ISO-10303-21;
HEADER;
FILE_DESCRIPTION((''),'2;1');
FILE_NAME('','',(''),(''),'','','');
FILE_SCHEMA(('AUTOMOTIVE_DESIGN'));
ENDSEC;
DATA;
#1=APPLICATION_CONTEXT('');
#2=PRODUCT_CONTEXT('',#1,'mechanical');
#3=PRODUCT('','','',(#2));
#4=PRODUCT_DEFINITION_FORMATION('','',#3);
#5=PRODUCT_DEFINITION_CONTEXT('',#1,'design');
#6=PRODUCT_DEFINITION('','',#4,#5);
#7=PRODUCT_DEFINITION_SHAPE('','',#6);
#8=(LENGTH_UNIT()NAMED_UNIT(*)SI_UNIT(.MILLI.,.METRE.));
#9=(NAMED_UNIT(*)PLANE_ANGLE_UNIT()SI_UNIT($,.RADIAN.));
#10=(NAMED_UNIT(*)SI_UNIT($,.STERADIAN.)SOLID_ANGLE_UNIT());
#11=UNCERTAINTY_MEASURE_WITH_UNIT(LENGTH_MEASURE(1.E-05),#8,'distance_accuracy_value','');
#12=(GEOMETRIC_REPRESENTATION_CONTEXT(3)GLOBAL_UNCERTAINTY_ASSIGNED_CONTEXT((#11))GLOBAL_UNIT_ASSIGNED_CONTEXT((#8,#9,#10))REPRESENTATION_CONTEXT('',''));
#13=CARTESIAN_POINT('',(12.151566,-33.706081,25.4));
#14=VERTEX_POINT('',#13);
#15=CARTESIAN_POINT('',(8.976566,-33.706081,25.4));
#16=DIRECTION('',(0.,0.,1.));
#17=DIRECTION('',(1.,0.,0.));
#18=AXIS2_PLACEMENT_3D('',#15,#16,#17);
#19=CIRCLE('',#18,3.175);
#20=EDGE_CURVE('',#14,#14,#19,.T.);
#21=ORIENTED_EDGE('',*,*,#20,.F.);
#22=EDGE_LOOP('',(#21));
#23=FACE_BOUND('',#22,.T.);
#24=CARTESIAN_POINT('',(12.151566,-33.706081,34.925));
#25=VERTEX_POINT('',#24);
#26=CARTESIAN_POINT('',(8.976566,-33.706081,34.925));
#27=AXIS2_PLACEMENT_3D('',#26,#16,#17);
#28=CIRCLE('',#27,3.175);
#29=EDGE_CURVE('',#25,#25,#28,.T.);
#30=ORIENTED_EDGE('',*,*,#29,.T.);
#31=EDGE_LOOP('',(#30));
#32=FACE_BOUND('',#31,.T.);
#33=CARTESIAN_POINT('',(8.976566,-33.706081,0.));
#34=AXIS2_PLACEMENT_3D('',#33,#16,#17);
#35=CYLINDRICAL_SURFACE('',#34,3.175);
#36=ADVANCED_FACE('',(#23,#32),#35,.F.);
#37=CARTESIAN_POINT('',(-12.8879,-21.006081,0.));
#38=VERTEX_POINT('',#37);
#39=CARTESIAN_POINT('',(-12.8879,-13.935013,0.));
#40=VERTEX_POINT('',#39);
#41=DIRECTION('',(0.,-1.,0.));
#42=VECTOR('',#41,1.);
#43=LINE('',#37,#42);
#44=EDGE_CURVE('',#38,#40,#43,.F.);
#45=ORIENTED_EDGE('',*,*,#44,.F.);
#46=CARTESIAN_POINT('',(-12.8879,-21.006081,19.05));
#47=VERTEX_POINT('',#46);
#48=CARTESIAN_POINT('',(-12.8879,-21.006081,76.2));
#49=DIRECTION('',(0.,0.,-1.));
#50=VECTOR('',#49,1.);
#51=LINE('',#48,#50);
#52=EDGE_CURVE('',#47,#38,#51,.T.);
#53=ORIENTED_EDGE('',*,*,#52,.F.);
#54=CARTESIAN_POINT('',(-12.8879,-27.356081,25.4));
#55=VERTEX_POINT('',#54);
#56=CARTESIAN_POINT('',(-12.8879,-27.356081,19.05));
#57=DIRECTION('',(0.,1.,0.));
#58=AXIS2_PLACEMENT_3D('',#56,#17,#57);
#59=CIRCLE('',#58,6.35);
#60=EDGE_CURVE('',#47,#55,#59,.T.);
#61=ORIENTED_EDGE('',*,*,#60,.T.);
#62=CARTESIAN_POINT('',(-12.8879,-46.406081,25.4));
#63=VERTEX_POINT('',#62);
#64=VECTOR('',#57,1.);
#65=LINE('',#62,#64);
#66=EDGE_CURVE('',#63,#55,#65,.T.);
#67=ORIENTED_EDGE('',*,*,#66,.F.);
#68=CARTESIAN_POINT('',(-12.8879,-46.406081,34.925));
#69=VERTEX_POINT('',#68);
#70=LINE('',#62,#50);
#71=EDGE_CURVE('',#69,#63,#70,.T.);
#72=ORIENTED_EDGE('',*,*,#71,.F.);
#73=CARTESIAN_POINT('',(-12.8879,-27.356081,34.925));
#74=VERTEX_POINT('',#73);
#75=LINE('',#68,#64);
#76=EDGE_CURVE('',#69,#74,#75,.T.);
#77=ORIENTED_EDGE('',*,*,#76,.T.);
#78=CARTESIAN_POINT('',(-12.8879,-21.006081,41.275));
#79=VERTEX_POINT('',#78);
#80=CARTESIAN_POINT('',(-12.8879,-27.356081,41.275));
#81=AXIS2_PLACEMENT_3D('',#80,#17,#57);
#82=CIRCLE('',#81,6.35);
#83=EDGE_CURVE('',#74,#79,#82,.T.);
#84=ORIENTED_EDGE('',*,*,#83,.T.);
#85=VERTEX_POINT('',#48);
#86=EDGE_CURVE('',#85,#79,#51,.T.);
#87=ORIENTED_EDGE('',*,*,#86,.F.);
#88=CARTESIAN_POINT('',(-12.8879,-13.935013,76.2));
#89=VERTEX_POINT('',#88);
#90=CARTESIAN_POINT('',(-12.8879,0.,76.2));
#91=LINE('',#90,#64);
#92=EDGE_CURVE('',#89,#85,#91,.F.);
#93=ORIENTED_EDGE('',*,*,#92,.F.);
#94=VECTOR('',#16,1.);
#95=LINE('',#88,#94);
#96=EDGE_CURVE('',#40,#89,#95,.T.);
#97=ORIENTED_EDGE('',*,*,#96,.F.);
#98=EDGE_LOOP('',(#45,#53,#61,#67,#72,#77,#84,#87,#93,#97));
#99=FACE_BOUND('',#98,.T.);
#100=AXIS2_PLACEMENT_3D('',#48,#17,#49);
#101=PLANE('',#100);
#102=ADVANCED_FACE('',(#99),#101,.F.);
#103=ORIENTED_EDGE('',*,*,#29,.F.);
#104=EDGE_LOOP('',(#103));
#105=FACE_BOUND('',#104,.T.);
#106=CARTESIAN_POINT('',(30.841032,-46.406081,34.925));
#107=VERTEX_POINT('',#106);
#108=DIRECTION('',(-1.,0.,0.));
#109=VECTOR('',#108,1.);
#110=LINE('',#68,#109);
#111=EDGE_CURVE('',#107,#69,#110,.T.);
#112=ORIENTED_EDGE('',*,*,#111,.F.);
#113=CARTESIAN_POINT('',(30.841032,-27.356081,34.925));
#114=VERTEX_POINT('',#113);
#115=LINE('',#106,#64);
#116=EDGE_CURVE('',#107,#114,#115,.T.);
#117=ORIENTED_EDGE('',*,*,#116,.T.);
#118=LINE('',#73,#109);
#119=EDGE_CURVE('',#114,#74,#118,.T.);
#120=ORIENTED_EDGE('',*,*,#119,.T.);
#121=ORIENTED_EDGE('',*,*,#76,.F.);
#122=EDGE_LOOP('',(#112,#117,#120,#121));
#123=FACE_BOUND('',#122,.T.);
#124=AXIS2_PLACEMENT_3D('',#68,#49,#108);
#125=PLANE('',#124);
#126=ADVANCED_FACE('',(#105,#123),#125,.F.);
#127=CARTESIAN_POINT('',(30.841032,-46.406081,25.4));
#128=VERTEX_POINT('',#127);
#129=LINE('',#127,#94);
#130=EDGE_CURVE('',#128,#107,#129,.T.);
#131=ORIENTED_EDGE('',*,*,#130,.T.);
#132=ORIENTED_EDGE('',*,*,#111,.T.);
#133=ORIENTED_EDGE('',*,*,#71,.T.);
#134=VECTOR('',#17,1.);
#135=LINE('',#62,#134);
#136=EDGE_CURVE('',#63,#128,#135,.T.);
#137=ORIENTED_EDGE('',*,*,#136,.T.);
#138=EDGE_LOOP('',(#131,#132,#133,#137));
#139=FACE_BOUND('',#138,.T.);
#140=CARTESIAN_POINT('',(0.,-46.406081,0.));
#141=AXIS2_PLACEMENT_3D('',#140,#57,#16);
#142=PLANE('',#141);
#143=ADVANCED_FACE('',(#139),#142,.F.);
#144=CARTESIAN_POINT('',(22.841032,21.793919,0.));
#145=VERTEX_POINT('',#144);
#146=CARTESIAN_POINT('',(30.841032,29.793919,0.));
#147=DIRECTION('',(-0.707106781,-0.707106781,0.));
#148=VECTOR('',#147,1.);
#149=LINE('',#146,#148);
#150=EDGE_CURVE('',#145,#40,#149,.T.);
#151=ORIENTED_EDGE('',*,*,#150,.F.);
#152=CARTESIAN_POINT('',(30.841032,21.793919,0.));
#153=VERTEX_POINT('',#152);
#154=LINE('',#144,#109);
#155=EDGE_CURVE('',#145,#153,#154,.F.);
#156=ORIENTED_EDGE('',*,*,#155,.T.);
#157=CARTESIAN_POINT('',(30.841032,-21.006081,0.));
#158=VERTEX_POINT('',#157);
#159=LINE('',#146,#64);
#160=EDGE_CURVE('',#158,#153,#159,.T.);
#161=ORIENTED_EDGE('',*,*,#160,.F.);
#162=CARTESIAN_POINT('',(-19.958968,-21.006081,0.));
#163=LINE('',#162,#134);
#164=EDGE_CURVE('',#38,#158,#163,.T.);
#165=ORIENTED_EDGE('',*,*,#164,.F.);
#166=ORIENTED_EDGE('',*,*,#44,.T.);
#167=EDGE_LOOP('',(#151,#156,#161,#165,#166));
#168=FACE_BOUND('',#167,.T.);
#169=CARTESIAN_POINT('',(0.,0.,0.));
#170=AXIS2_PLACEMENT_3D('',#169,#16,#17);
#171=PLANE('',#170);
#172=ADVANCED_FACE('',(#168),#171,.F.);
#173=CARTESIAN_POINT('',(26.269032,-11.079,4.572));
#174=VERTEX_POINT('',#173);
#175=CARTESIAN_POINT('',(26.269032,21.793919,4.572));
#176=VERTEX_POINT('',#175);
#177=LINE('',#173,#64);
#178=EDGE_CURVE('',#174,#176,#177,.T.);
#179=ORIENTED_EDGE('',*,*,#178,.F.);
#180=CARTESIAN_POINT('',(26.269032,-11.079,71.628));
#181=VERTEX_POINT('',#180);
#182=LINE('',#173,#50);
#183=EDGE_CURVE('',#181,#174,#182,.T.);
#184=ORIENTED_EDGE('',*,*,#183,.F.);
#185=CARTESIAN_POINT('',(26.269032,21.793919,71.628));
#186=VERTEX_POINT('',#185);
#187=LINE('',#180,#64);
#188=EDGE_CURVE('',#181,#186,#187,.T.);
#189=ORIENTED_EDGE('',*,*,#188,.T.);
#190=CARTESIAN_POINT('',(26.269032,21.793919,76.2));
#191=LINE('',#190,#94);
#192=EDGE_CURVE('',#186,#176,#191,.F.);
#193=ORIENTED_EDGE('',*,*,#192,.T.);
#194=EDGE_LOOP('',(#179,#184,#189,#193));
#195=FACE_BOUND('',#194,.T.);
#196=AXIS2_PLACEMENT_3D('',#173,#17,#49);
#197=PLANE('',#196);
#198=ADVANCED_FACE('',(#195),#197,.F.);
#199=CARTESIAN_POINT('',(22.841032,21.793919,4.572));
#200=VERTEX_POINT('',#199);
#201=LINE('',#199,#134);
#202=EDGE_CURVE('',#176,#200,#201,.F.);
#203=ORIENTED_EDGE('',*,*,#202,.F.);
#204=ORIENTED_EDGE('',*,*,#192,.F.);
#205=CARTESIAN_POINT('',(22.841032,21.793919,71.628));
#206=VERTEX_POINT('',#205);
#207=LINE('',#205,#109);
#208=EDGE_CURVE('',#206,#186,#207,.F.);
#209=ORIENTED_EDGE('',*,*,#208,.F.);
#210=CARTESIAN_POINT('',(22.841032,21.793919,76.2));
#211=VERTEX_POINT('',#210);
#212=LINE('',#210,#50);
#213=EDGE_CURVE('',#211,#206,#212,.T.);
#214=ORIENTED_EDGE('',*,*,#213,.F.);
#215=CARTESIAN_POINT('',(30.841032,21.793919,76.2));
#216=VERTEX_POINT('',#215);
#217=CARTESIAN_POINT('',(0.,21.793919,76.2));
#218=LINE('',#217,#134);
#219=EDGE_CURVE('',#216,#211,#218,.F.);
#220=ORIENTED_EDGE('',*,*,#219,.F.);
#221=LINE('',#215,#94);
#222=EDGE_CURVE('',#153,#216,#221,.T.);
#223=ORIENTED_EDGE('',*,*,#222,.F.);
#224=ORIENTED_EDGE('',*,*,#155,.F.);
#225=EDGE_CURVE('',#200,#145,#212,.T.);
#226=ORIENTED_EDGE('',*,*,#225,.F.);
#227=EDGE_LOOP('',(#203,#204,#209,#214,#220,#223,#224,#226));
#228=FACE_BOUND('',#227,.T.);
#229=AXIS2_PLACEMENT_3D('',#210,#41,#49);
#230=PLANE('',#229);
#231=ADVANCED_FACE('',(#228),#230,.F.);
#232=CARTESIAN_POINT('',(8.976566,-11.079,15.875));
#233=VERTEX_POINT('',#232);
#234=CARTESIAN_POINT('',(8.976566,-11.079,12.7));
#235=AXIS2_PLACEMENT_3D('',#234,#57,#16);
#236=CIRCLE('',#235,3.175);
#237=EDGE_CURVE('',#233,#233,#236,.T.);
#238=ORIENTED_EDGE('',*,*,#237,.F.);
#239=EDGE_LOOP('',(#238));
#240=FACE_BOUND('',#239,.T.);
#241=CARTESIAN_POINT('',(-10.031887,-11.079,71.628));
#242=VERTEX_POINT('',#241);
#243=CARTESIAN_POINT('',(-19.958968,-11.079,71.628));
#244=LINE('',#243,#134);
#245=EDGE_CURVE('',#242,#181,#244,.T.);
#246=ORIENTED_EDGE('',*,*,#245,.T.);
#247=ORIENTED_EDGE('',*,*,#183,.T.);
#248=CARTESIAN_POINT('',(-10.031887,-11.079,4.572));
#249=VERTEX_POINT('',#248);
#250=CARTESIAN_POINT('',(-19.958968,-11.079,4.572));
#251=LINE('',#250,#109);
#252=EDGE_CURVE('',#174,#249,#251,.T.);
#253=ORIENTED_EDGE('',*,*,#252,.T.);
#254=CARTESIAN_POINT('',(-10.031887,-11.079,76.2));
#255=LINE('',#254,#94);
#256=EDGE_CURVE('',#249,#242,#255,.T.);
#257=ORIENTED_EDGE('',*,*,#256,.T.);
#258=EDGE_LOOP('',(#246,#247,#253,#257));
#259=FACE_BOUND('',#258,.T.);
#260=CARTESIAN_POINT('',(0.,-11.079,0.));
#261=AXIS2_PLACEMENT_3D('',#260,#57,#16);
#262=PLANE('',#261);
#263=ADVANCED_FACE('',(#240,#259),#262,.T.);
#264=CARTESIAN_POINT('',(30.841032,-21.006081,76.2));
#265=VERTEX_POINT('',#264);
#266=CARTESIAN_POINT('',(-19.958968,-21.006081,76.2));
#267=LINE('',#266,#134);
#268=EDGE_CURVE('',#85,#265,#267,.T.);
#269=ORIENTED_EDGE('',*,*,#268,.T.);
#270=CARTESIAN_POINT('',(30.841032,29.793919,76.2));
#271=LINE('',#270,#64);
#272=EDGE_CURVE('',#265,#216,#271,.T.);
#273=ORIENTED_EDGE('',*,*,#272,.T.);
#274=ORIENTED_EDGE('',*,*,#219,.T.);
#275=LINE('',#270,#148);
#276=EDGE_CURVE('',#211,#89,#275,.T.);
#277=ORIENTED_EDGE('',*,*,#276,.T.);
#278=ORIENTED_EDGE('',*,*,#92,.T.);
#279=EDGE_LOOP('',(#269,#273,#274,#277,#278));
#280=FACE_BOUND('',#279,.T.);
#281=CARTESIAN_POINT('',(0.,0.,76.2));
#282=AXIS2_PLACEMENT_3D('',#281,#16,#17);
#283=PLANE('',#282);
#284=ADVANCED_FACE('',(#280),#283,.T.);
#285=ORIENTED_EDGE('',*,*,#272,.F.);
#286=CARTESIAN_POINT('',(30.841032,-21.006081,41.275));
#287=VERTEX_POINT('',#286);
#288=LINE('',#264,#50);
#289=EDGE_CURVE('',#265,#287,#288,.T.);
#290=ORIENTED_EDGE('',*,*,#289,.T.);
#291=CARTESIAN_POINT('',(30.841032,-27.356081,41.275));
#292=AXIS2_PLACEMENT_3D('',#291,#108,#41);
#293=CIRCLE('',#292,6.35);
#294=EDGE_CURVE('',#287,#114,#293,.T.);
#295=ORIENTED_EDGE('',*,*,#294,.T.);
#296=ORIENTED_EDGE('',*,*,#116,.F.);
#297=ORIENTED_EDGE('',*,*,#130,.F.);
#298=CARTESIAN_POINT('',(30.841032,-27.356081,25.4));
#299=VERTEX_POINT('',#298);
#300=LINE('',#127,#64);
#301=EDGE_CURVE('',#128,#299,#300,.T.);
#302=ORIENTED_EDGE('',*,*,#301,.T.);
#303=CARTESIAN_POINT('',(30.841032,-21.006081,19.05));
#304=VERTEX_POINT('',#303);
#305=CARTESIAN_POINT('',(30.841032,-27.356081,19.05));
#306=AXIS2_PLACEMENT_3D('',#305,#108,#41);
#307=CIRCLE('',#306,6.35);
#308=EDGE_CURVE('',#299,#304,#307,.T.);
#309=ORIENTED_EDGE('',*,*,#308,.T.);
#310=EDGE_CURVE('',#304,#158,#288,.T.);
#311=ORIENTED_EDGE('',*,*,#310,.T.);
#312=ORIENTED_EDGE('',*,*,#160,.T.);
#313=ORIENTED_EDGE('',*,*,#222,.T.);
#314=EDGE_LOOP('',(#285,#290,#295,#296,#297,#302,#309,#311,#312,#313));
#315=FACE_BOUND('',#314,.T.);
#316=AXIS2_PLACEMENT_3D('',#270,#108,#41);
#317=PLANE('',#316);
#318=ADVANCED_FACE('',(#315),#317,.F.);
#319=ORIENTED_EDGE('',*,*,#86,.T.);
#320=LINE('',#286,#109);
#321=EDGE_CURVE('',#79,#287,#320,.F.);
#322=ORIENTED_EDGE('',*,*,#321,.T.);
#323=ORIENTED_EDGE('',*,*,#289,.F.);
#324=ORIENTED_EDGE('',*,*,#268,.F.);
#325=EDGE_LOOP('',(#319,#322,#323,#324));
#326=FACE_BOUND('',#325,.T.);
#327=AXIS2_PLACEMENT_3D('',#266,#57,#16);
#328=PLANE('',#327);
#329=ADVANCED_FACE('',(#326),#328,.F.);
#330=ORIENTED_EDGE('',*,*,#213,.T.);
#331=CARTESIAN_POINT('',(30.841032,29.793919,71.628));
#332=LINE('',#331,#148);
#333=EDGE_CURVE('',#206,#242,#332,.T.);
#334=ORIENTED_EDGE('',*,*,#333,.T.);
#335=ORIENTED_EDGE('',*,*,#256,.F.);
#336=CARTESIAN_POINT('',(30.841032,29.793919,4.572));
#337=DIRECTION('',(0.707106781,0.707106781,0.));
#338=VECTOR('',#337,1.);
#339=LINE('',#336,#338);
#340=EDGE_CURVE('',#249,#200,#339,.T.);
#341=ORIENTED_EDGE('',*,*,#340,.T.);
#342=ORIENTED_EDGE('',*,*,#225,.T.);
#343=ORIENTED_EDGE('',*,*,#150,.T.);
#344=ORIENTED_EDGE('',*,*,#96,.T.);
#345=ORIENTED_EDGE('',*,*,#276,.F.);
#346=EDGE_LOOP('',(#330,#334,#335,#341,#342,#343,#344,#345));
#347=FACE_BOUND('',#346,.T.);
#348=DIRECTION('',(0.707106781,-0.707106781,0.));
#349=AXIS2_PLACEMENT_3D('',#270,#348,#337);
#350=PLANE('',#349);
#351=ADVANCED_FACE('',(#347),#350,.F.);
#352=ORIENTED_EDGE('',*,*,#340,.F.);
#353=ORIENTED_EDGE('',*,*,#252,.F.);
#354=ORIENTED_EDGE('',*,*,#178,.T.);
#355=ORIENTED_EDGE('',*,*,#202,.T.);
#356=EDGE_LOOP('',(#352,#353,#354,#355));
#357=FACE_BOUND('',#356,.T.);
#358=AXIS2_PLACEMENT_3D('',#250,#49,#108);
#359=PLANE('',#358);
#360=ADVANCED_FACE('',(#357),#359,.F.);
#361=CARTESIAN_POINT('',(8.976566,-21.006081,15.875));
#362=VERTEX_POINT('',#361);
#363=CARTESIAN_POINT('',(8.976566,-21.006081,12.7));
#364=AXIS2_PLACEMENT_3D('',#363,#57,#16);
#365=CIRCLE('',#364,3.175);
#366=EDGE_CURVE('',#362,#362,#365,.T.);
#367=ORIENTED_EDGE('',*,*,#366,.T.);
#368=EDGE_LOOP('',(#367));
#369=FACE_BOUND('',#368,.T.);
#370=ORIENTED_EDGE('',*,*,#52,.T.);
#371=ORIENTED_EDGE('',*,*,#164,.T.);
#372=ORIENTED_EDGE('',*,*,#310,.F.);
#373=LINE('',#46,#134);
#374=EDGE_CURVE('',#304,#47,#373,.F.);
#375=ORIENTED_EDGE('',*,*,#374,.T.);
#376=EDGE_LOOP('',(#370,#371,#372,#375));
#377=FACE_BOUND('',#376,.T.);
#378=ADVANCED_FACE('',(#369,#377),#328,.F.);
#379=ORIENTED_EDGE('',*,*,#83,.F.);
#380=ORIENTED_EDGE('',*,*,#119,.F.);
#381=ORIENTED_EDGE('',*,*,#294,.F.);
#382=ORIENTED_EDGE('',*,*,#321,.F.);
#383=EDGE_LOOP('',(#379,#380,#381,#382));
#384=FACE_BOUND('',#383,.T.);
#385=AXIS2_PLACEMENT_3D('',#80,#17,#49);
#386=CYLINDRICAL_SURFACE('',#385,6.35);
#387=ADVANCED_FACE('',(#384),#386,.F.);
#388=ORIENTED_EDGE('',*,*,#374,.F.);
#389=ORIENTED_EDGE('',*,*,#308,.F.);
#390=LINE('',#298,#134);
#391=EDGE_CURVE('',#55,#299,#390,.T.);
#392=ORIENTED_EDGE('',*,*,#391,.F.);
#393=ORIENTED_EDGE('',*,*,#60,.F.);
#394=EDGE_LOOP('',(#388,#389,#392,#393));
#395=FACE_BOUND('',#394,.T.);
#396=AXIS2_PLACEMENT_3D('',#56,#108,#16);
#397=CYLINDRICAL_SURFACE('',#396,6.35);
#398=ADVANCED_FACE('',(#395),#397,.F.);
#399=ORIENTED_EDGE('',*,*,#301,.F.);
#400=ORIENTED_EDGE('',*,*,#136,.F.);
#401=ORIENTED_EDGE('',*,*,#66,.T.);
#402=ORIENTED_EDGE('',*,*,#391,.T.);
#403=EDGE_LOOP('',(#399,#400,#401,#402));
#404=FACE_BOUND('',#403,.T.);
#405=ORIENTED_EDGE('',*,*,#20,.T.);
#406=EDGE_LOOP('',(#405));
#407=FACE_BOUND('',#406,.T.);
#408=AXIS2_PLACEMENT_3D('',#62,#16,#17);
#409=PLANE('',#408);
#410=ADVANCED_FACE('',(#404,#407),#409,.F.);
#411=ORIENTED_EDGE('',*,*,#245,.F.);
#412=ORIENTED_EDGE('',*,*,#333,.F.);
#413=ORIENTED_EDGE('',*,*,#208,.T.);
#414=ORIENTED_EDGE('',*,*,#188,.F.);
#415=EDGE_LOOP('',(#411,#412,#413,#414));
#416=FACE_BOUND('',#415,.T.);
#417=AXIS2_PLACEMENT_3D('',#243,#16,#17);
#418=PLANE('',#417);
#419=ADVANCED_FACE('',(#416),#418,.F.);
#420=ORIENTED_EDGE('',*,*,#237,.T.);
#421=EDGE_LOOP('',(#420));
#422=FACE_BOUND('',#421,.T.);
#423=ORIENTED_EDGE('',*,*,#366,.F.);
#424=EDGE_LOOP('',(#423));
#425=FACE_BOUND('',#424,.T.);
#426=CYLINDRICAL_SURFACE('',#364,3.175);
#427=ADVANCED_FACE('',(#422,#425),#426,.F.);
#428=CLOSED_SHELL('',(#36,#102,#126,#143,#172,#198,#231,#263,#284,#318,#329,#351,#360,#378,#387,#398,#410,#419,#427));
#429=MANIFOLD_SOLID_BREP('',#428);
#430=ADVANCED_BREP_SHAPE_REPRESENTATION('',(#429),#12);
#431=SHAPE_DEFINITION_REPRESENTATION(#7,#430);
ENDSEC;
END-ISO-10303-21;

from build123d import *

# Parameters (mm, degrees)
BOSS_EXTRUDE1_DEPTH     = 76.2
CUT_EXTRUDE1_DEPTH      = 32
CUT_EXTRUDE1_DEPTH_BACK = 11.07899994
SKETCH2_W               = 46.228
SKETCH2_H               = 67.056
CHAMFER2_SIZE           = 11.313708499
CHAMFER2_SIZE_2         = 8
CHAMFER3_SIZE           = 10
CHAMFER3_SIZE2          = 7.071067812
SKETCH3_R               = 3.175
CUT_EXTRUDE2_DEPTH      = 89.533824561
SKETCH8_W               = 43.728932188
SKETCH8_H               = 9.525
BOSS_EXTRUDE3_DEPTH     = 25.4
SKETCH9_R               = 3.175
CUT_EXTRUDE3_DEPTH      = 70.342045029
FILLET2_R               = 6.35


with BuildPart() as part:
    # Sketch1 → Boss-Extrude1 (new body)
    with BuildSketch(Plane.XY):
        Polygon((30.841032184, 29.793919389), (-19.958967816, -21.006080611), (30.841032184, -21.006080611), align=None)
    extrude(amount=BOSS_EXTRUDE1_DEPTH)

    # Sketch2 → Cut-Extrude1 (cut, two sides: drawn at the far end of the back side and taken through both)
    with BuildSketch(Plane(origin=(0, 0, 0), x_dir=(1, 0, 0), z_dir=(0, 1, 0)).offset(-CUT_EXTRUDE1_DEPTH_BACK)):
        with Locations((3.155032184, -38.1)):
            Rectangle(SKETCH2_W, SKETCH2_H)
    extrude(amount=CUT_EXTRUDE1_DEPTH + CUT_EXTRUDE1_DEPTH_BACK, mode=Mode.SUBTRACT)

    # Chamfer2
    # the kernel refuses this chamfer: 11.313708499, 8 mm, written as the material it takes off along each edge
    with BuildSketch(Plane(origin=(30.841032184, 29.793919389, -29.095271678), x_dir=(-0.7262819568766876, -0.6873969152646594, 0), z_dir=(0, 0, 1))) as chamfer2_piece_1:
        Polygon((CHAMFER2_SIZE * 0.99962191691, CHAMFER2_SIZE * 0.0274958766105), (CHAMFER2_SIZE_2 * 0.687396915265, CHAMFER2_SIZE_2 * 0.726281956877), (0, 0), align=None)
    extrude(amount=134.390543355, mode=Mode.SUBTRACT)

    # Chamfer3
    chamfer3_edges = [part.edges().sort_by_distance(p)[0] for p in [
        (-19.958967816, -21.006080611, 38.1),
    ]]
    chamfer3_side = [part.faces().sort_by_distance(p)[0] for p in [
        (1.441032184, 0.393919389, 0.973145416),
    ]]
    chamfer(chamfer3_edges, length=CHAMFER3_SIZE, length2=CHAMFER3_SIZE2, reference=chamfer3_side[0])

    # Sketch3 → Cut-Extrude2 (cut, through all)
    with BuildSketch(Plane(origin=(0, -11.07899994, 0), x_dir=(1, 0, 0), z_dir=(0, 1, 0))):
        with Locations(Location((8.97656609, -12.7, 0), (0, 0, 270))):
            Circle(SKETCH3_R)
    extrude(amount=-CUT_EXTRUDE2_DEPTH, mode=Mode.SUBTRACT)

    # Sketch8 → Boss-Extrude3 (add)
    with BuildSketch(Plane.XZ.offset(21.006080611)):
        with Locations((8.97656609, 30.1625)):
            Rectangle(SKETCH8_W, SKETCH8_H)
    extrude(amount=BOSS_EXTRUDE3_DEPTH)

    # Sketch9 → Cut-Extrude3 (cut, through all)
    with BuildSketch(Plane.XY.offset(34.925)):
        with Locations((8.97656609, -33.706080611)):
            Circle(SKETCH9_R)
    extrude(amount=-CUT_EXTRUDE3_DEPTH, mode=Mode.SUBTRACT)

    # Fillet2
    fillet2_edges = [part.edges().sort_by_distance(p)[0] for p in [
        (8.97656609, -21.006080611, 34.925),
        (8.97656609, -21.006080611, 25.4),
    ]]
    fillet(fillet2_edges, radius=FILLET2_R)


solid = part.part
